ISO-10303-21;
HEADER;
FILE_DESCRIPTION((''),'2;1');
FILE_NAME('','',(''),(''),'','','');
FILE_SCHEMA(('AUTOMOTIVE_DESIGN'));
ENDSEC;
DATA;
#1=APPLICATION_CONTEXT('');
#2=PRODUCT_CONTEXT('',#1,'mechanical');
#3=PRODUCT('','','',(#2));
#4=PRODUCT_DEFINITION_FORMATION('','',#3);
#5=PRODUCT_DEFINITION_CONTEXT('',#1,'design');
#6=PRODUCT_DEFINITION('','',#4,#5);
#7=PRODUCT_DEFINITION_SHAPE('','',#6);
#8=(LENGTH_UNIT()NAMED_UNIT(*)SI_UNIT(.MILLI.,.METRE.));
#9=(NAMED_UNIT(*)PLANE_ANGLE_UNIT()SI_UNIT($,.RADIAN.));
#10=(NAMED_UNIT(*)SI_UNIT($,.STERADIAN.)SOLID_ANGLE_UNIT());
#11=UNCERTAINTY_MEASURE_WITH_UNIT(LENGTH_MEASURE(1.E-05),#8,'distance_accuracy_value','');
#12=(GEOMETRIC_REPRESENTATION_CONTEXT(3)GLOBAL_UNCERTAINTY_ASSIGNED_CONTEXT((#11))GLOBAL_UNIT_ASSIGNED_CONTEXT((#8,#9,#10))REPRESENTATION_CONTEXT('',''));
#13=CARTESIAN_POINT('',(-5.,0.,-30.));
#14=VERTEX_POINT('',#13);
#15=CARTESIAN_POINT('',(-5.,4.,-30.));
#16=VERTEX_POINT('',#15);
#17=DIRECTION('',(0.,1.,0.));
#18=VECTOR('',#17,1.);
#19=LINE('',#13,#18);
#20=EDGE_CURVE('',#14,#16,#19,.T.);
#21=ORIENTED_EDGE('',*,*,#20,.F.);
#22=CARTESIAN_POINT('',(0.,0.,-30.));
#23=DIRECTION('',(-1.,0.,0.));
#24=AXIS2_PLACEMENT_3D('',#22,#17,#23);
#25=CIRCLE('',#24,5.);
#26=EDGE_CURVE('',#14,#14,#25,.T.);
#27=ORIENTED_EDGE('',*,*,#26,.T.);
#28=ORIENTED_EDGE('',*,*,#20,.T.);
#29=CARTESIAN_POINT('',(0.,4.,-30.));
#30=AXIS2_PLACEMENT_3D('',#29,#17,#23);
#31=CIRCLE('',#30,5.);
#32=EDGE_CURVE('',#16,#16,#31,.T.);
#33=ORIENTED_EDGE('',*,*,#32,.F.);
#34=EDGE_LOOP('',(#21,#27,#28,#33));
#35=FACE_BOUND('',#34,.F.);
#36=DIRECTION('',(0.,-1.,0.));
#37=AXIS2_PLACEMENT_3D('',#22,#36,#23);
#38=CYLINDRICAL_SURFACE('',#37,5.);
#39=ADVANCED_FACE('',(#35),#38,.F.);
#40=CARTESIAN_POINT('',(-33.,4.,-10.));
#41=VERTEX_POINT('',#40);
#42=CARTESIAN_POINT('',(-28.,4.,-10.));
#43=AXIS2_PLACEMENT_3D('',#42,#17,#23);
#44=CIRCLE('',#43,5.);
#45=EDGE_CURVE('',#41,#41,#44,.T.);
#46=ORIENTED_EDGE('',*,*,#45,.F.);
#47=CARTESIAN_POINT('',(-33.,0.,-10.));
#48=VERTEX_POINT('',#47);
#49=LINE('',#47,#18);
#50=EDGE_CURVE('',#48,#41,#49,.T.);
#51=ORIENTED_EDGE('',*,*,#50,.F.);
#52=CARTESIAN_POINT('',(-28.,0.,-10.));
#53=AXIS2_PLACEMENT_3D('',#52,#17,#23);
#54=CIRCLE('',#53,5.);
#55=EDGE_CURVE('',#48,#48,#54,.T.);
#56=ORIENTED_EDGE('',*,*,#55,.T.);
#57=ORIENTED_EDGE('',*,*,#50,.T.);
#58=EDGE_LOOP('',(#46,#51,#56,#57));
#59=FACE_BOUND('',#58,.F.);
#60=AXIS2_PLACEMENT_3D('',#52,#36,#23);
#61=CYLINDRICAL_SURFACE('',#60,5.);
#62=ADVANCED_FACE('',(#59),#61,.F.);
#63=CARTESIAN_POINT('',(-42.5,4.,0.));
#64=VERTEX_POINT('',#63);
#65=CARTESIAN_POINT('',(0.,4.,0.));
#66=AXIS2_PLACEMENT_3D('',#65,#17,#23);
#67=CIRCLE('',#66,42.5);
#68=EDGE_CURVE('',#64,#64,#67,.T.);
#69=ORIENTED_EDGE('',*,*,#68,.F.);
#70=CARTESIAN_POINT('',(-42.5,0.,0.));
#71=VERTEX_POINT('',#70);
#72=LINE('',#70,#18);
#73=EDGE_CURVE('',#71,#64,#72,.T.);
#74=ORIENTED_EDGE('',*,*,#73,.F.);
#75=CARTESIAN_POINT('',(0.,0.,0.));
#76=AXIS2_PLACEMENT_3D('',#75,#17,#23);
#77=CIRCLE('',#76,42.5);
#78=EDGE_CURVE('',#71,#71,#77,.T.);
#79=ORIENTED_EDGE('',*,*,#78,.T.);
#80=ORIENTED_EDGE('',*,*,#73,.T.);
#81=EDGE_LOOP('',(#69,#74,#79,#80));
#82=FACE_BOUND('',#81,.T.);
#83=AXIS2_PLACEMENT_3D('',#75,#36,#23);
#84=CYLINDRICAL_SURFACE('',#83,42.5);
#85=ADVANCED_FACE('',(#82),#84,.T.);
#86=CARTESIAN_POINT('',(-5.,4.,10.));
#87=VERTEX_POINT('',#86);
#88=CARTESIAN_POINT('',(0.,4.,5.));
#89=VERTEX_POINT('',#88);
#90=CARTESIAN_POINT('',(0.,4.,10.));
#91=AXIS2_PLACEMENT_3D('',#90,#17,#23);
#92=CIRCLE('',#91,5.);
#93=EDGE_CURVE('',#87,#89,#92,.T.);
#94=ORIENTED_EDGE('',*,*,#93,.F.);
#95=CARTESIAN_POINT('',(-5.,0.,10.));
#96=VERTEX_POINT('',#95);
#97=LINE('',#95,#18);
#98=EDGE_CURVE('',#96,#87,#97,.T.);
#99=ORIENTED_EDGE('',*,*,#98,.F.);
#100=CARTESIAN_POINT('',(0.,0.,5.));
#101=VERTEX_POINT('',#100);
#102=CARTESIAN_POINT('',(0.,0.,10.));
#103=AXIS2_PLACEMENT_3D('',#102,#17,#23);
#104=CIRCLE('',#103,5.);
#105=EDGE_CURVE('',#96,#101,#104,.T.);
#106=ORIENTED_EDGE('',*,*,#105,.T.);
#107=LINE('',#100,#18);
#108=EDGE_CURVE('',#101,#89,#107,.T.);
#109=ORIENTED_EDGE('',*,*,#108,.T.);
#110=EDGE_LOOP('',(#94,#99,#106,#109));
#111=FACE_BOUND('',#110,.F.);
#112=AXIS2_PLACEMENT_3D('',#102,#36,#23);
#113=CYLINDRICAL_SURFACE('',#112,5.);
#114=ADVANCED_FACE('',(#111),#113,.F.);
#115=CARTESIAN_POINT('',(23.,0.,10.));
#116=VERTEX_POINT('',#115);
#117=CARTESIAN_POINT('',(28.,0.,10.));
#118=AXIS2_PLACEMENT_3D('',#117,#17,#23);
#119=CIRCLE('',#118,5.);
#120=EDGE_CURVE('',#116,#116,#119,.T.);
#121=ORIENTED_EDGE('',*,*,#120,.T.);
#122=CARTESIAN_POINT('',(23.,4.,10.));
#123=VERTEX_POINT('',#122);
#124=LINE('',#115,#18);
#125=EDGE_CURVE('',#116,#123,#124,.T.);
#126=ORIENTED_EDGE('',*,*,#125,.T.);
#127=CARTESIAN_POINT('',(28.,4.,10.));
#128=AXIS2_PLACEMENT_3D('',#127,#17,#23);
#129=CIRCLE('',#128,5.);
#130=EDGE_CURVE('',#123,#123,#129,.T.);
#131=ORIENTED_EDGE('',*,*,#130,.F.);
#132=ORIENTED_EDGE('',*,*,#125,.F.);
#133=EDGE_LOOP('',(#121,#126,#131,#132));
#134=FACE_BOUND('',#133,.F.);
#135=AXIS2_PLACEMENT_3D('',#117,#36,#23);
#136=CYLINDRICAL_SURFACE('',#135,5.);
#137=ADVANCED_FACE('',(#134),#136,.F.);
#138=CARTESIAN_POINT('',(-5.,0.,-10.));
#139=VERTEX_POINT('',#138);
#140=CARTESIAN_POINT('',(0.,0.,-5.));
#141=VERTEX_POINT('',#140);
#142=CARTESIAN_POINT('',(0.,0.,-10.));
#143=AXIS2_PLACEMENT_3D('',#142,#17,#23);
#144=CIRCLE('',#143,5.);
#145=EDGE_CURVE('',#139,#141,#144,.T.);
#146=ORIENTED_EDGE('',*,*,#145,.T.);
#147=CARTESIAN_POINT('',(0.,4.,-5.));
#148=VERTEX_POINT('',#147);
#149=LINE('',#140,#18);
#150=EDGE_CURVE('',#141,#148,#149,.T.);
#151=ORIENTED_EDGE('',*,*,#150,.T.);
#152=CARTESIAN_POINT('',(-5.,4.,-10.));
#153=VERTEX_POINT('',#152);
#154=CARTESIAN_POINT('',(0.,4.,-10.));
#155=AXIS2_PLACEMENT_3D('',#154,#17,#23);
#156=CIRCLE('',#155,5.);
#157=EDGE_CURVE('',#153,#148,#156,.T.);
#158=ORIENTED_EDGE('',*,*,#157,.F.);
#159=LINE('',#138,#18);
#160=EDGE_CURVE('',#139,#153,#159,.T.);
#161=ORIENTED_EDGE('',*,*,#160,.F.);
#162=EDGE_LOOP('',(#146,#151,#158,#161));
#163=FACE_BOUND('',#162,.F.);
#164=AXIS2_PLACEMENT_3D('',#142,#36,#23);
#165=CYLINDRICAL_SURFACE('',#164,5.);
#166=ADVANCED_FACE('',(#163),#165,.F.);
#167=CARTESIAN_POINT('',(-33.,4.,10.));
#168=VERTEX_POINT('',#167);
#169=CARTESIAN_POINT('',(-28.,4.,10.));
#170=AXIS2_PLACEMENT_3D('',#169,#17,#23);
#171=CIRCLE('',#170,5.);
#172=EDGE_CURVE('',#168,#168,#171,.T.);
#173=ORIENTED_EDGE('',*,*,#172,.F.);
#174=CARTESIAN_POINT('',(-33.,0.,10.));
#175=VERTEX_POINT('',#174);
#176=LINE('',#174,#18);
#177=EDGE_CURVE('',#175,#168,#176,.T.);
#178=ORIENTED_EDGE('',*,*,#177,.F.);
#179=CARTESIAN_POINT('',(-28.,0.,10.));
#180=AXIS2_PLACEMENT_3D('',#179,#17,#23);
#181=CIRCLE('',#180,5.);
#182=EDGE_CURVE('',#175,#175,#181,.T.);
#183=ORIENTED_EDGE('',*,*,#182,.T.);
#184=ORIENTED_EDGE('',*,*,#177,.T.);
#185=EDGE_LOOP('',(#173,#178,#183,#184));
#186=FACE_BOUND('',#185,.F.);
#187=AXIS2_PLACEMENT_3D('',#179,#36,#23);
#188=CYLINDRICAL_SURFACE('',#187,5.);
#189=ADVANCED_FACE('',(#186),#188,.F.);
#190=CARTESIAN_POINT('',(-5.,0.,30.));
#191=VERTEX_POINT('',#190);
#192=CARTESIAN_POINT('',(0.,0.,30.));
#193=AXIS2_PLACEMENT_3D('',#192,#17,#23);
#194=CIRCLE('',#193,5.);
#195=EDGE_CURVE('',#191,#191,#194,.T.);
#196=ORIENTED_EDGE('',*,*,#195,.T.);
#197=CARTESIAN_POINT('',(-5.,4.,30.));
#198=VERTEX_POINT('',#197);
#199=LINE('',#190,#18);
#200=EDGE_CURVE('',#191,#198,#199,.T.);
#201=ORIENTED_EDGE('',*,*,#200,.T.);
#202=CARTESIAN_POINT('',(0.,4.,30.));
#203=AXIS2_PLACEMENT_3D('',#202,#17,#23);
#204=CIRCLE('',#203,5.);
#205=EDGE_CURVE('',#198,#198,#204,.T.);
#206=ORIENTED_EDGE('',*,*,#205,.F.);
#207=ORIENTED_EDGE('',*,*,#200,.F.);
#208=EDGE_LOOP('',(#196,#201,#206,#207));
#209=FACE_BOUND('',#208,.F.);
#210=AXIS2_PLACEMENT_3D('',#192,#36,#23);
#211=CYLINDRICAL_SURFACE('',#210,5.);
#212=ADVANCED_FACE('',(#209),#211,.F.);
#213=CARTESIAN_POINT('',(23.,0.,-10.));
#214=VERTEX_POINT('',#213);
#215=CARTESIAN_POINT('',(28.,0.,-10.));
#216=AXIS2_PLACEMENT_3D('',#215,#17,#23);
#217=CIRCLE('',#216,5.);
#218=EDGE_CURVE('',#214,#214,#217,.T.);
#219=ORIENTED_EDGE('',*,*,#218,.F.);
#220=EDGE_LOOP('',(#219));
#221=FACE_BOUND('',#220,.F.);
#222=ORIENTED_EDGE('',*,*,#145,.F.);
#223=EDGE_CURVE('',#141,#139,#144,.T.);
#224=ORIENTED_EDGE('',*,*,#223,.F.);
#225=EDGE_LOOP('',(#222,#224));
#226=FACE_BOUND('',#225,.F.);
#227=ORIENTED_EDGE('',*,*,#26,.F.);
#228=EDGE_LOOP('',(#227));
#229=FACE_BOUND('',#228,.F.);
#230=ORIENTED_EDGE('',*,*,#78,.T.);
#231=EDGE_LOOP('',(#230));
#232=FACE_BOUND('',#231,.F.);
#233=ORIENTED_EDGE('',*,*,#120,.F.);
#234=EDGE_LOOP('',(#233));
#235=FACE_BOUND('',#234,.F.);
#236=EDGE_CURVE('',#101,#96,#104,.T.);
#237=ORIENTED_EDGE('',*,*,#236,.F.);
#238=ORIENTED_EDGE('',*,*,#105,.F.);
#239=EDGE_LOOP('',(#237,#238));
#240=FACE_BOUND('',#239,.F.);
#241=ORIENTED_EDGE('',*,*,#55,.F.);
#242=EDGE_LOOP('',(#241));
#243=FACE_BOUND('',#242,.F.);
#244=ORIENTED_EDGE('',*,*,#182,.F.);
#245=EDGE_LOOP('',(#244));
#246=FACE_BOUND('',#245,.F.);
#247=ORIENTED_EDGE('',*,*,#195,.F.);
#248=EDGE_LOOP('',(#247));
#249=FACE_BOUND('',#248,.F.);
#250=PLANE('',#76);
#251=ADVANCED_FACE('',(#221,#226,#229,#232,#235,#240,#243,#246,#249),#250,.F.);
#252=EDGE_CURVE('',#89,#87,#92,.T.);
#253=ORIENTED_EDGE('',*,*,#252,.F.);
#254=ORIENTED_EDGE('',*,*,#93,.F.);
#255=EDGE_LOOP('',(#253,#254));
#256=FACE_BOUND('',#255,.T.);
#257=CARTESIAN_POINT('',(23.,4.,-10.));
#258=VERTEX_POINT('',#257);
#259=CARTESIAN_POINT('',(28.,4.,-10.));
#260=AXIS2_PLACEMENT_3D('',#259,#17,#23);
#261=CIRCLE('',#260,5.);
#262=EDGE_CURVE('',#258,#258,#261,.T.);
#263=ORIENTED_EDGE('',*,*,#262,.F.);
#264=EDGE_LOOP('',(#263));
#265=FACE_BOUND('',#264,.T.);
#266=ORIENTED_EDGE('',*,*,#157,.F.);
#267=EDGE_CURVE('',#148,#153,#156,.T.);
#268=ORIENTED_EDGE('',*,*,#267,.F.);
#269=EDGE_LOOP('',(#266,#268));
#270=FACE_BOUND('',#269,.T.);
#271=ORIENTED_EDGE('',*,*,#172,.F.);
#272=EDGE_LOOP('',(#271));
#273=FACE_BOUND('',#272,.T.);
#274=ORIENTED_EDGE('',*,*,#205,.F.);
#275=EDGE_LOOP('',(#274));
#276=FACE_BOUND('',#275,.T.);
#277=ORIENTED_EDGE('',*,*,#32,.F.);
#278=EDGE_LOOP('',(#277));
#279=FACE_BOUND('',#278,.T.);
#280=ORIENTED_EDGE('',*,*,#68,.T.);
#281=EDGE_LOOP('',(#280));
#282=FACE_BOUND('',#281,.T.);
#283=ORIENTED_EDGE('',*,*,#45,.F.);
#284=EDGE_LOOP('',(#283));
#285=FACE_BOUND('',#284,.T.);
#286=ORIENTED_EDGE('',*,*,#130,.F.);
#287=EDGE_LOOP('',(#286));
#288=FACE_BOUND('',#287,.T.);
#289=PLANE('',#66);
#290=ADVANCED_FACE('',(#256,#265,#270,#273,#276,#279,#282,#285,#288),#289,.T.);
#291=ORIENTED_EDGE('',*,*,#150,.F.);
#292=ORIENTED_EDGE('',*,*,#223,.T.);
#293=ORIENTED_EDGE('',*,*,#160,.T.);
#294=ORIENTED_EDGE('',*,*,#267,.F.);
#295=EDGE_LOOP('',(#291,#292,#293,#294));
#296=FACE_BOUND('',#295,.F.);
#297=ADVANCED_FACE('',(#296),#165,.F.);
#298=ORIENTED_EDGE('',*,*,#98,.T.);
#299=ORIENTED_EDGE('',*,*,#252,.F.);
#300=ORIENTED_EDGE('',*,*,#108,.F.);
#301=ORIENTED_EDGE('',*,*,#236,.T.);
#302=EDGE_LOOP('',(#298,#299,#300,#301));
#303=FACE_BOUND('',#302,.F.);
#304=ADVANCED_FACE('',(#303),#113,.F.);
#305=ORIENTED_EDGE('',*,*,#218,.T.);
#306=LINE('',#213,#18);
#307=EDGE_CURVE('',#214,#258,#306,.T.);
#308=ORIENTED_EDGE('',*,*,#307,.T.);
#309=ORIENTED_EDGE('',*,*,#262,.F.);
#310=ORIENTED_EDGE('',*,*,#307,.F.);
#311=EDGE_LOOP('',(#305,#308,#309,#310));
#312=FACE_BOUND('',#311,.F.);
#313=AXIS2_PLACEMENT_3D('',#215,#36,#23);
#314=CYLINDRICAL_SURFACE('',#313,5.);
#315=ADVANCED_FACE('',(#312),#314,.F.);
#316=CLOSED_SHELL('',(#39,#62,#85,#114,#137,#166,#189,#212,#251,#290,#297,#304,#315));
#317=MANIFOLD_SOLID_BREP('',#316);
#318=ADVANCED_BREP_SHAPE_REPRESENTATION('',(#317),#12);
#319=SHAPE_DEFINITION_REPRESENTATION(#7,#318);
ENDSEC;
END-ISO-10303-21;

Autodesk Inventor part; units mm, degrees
ref_plane "YZ Plane" through (0, 0, 0) normal (1, 0, 0) x (0, 1, 0)
ref_plane "XZ Plane" through (0, 0, 0) normal (0, 1, 0) x (-1, 0, 0)
ref_plane "XY Plane" through (0, 0, 0) normal (0, 0, 1) x (1, 0, 0)
sketch "Sketch1" plane through (0, 0, 0) normal (0, 1, 0) x (-1, 0, 0)
  circle A0 centre (0, 0) radius 42.5
  line L0 (0, 0) -> (0, -5)
  line L1 (0, 0) -> (0, 5)
  circle A1 centre (28, 10) radius 5
  circle A2 centre (0, 10) radius 5
  circle A3 centre (-28, 10) radius 5
  circle A4 centre (28, -10) radius 5
  circle A5 centre (-28, -10) radius 5
  circle A6 centre (0, -10) radius 5
  circle A7 centre (0, 30) radius 5
  circle A8 centre (0, -30) radius 5
  dimension "d2" = 85
  dimension "d5" = 10
  dimension "d6" = 10
  dimension "d7" = 10
  dimension "d10" = 10
  dimension "d11" = 10
  dimension "d12" = 10
  dimension "d13" = 10
  dimension "d15" = 10
extrude "Extrusion1" add sketch "Sketch1" along normal blind 4
properties part number "Wires_Base"
